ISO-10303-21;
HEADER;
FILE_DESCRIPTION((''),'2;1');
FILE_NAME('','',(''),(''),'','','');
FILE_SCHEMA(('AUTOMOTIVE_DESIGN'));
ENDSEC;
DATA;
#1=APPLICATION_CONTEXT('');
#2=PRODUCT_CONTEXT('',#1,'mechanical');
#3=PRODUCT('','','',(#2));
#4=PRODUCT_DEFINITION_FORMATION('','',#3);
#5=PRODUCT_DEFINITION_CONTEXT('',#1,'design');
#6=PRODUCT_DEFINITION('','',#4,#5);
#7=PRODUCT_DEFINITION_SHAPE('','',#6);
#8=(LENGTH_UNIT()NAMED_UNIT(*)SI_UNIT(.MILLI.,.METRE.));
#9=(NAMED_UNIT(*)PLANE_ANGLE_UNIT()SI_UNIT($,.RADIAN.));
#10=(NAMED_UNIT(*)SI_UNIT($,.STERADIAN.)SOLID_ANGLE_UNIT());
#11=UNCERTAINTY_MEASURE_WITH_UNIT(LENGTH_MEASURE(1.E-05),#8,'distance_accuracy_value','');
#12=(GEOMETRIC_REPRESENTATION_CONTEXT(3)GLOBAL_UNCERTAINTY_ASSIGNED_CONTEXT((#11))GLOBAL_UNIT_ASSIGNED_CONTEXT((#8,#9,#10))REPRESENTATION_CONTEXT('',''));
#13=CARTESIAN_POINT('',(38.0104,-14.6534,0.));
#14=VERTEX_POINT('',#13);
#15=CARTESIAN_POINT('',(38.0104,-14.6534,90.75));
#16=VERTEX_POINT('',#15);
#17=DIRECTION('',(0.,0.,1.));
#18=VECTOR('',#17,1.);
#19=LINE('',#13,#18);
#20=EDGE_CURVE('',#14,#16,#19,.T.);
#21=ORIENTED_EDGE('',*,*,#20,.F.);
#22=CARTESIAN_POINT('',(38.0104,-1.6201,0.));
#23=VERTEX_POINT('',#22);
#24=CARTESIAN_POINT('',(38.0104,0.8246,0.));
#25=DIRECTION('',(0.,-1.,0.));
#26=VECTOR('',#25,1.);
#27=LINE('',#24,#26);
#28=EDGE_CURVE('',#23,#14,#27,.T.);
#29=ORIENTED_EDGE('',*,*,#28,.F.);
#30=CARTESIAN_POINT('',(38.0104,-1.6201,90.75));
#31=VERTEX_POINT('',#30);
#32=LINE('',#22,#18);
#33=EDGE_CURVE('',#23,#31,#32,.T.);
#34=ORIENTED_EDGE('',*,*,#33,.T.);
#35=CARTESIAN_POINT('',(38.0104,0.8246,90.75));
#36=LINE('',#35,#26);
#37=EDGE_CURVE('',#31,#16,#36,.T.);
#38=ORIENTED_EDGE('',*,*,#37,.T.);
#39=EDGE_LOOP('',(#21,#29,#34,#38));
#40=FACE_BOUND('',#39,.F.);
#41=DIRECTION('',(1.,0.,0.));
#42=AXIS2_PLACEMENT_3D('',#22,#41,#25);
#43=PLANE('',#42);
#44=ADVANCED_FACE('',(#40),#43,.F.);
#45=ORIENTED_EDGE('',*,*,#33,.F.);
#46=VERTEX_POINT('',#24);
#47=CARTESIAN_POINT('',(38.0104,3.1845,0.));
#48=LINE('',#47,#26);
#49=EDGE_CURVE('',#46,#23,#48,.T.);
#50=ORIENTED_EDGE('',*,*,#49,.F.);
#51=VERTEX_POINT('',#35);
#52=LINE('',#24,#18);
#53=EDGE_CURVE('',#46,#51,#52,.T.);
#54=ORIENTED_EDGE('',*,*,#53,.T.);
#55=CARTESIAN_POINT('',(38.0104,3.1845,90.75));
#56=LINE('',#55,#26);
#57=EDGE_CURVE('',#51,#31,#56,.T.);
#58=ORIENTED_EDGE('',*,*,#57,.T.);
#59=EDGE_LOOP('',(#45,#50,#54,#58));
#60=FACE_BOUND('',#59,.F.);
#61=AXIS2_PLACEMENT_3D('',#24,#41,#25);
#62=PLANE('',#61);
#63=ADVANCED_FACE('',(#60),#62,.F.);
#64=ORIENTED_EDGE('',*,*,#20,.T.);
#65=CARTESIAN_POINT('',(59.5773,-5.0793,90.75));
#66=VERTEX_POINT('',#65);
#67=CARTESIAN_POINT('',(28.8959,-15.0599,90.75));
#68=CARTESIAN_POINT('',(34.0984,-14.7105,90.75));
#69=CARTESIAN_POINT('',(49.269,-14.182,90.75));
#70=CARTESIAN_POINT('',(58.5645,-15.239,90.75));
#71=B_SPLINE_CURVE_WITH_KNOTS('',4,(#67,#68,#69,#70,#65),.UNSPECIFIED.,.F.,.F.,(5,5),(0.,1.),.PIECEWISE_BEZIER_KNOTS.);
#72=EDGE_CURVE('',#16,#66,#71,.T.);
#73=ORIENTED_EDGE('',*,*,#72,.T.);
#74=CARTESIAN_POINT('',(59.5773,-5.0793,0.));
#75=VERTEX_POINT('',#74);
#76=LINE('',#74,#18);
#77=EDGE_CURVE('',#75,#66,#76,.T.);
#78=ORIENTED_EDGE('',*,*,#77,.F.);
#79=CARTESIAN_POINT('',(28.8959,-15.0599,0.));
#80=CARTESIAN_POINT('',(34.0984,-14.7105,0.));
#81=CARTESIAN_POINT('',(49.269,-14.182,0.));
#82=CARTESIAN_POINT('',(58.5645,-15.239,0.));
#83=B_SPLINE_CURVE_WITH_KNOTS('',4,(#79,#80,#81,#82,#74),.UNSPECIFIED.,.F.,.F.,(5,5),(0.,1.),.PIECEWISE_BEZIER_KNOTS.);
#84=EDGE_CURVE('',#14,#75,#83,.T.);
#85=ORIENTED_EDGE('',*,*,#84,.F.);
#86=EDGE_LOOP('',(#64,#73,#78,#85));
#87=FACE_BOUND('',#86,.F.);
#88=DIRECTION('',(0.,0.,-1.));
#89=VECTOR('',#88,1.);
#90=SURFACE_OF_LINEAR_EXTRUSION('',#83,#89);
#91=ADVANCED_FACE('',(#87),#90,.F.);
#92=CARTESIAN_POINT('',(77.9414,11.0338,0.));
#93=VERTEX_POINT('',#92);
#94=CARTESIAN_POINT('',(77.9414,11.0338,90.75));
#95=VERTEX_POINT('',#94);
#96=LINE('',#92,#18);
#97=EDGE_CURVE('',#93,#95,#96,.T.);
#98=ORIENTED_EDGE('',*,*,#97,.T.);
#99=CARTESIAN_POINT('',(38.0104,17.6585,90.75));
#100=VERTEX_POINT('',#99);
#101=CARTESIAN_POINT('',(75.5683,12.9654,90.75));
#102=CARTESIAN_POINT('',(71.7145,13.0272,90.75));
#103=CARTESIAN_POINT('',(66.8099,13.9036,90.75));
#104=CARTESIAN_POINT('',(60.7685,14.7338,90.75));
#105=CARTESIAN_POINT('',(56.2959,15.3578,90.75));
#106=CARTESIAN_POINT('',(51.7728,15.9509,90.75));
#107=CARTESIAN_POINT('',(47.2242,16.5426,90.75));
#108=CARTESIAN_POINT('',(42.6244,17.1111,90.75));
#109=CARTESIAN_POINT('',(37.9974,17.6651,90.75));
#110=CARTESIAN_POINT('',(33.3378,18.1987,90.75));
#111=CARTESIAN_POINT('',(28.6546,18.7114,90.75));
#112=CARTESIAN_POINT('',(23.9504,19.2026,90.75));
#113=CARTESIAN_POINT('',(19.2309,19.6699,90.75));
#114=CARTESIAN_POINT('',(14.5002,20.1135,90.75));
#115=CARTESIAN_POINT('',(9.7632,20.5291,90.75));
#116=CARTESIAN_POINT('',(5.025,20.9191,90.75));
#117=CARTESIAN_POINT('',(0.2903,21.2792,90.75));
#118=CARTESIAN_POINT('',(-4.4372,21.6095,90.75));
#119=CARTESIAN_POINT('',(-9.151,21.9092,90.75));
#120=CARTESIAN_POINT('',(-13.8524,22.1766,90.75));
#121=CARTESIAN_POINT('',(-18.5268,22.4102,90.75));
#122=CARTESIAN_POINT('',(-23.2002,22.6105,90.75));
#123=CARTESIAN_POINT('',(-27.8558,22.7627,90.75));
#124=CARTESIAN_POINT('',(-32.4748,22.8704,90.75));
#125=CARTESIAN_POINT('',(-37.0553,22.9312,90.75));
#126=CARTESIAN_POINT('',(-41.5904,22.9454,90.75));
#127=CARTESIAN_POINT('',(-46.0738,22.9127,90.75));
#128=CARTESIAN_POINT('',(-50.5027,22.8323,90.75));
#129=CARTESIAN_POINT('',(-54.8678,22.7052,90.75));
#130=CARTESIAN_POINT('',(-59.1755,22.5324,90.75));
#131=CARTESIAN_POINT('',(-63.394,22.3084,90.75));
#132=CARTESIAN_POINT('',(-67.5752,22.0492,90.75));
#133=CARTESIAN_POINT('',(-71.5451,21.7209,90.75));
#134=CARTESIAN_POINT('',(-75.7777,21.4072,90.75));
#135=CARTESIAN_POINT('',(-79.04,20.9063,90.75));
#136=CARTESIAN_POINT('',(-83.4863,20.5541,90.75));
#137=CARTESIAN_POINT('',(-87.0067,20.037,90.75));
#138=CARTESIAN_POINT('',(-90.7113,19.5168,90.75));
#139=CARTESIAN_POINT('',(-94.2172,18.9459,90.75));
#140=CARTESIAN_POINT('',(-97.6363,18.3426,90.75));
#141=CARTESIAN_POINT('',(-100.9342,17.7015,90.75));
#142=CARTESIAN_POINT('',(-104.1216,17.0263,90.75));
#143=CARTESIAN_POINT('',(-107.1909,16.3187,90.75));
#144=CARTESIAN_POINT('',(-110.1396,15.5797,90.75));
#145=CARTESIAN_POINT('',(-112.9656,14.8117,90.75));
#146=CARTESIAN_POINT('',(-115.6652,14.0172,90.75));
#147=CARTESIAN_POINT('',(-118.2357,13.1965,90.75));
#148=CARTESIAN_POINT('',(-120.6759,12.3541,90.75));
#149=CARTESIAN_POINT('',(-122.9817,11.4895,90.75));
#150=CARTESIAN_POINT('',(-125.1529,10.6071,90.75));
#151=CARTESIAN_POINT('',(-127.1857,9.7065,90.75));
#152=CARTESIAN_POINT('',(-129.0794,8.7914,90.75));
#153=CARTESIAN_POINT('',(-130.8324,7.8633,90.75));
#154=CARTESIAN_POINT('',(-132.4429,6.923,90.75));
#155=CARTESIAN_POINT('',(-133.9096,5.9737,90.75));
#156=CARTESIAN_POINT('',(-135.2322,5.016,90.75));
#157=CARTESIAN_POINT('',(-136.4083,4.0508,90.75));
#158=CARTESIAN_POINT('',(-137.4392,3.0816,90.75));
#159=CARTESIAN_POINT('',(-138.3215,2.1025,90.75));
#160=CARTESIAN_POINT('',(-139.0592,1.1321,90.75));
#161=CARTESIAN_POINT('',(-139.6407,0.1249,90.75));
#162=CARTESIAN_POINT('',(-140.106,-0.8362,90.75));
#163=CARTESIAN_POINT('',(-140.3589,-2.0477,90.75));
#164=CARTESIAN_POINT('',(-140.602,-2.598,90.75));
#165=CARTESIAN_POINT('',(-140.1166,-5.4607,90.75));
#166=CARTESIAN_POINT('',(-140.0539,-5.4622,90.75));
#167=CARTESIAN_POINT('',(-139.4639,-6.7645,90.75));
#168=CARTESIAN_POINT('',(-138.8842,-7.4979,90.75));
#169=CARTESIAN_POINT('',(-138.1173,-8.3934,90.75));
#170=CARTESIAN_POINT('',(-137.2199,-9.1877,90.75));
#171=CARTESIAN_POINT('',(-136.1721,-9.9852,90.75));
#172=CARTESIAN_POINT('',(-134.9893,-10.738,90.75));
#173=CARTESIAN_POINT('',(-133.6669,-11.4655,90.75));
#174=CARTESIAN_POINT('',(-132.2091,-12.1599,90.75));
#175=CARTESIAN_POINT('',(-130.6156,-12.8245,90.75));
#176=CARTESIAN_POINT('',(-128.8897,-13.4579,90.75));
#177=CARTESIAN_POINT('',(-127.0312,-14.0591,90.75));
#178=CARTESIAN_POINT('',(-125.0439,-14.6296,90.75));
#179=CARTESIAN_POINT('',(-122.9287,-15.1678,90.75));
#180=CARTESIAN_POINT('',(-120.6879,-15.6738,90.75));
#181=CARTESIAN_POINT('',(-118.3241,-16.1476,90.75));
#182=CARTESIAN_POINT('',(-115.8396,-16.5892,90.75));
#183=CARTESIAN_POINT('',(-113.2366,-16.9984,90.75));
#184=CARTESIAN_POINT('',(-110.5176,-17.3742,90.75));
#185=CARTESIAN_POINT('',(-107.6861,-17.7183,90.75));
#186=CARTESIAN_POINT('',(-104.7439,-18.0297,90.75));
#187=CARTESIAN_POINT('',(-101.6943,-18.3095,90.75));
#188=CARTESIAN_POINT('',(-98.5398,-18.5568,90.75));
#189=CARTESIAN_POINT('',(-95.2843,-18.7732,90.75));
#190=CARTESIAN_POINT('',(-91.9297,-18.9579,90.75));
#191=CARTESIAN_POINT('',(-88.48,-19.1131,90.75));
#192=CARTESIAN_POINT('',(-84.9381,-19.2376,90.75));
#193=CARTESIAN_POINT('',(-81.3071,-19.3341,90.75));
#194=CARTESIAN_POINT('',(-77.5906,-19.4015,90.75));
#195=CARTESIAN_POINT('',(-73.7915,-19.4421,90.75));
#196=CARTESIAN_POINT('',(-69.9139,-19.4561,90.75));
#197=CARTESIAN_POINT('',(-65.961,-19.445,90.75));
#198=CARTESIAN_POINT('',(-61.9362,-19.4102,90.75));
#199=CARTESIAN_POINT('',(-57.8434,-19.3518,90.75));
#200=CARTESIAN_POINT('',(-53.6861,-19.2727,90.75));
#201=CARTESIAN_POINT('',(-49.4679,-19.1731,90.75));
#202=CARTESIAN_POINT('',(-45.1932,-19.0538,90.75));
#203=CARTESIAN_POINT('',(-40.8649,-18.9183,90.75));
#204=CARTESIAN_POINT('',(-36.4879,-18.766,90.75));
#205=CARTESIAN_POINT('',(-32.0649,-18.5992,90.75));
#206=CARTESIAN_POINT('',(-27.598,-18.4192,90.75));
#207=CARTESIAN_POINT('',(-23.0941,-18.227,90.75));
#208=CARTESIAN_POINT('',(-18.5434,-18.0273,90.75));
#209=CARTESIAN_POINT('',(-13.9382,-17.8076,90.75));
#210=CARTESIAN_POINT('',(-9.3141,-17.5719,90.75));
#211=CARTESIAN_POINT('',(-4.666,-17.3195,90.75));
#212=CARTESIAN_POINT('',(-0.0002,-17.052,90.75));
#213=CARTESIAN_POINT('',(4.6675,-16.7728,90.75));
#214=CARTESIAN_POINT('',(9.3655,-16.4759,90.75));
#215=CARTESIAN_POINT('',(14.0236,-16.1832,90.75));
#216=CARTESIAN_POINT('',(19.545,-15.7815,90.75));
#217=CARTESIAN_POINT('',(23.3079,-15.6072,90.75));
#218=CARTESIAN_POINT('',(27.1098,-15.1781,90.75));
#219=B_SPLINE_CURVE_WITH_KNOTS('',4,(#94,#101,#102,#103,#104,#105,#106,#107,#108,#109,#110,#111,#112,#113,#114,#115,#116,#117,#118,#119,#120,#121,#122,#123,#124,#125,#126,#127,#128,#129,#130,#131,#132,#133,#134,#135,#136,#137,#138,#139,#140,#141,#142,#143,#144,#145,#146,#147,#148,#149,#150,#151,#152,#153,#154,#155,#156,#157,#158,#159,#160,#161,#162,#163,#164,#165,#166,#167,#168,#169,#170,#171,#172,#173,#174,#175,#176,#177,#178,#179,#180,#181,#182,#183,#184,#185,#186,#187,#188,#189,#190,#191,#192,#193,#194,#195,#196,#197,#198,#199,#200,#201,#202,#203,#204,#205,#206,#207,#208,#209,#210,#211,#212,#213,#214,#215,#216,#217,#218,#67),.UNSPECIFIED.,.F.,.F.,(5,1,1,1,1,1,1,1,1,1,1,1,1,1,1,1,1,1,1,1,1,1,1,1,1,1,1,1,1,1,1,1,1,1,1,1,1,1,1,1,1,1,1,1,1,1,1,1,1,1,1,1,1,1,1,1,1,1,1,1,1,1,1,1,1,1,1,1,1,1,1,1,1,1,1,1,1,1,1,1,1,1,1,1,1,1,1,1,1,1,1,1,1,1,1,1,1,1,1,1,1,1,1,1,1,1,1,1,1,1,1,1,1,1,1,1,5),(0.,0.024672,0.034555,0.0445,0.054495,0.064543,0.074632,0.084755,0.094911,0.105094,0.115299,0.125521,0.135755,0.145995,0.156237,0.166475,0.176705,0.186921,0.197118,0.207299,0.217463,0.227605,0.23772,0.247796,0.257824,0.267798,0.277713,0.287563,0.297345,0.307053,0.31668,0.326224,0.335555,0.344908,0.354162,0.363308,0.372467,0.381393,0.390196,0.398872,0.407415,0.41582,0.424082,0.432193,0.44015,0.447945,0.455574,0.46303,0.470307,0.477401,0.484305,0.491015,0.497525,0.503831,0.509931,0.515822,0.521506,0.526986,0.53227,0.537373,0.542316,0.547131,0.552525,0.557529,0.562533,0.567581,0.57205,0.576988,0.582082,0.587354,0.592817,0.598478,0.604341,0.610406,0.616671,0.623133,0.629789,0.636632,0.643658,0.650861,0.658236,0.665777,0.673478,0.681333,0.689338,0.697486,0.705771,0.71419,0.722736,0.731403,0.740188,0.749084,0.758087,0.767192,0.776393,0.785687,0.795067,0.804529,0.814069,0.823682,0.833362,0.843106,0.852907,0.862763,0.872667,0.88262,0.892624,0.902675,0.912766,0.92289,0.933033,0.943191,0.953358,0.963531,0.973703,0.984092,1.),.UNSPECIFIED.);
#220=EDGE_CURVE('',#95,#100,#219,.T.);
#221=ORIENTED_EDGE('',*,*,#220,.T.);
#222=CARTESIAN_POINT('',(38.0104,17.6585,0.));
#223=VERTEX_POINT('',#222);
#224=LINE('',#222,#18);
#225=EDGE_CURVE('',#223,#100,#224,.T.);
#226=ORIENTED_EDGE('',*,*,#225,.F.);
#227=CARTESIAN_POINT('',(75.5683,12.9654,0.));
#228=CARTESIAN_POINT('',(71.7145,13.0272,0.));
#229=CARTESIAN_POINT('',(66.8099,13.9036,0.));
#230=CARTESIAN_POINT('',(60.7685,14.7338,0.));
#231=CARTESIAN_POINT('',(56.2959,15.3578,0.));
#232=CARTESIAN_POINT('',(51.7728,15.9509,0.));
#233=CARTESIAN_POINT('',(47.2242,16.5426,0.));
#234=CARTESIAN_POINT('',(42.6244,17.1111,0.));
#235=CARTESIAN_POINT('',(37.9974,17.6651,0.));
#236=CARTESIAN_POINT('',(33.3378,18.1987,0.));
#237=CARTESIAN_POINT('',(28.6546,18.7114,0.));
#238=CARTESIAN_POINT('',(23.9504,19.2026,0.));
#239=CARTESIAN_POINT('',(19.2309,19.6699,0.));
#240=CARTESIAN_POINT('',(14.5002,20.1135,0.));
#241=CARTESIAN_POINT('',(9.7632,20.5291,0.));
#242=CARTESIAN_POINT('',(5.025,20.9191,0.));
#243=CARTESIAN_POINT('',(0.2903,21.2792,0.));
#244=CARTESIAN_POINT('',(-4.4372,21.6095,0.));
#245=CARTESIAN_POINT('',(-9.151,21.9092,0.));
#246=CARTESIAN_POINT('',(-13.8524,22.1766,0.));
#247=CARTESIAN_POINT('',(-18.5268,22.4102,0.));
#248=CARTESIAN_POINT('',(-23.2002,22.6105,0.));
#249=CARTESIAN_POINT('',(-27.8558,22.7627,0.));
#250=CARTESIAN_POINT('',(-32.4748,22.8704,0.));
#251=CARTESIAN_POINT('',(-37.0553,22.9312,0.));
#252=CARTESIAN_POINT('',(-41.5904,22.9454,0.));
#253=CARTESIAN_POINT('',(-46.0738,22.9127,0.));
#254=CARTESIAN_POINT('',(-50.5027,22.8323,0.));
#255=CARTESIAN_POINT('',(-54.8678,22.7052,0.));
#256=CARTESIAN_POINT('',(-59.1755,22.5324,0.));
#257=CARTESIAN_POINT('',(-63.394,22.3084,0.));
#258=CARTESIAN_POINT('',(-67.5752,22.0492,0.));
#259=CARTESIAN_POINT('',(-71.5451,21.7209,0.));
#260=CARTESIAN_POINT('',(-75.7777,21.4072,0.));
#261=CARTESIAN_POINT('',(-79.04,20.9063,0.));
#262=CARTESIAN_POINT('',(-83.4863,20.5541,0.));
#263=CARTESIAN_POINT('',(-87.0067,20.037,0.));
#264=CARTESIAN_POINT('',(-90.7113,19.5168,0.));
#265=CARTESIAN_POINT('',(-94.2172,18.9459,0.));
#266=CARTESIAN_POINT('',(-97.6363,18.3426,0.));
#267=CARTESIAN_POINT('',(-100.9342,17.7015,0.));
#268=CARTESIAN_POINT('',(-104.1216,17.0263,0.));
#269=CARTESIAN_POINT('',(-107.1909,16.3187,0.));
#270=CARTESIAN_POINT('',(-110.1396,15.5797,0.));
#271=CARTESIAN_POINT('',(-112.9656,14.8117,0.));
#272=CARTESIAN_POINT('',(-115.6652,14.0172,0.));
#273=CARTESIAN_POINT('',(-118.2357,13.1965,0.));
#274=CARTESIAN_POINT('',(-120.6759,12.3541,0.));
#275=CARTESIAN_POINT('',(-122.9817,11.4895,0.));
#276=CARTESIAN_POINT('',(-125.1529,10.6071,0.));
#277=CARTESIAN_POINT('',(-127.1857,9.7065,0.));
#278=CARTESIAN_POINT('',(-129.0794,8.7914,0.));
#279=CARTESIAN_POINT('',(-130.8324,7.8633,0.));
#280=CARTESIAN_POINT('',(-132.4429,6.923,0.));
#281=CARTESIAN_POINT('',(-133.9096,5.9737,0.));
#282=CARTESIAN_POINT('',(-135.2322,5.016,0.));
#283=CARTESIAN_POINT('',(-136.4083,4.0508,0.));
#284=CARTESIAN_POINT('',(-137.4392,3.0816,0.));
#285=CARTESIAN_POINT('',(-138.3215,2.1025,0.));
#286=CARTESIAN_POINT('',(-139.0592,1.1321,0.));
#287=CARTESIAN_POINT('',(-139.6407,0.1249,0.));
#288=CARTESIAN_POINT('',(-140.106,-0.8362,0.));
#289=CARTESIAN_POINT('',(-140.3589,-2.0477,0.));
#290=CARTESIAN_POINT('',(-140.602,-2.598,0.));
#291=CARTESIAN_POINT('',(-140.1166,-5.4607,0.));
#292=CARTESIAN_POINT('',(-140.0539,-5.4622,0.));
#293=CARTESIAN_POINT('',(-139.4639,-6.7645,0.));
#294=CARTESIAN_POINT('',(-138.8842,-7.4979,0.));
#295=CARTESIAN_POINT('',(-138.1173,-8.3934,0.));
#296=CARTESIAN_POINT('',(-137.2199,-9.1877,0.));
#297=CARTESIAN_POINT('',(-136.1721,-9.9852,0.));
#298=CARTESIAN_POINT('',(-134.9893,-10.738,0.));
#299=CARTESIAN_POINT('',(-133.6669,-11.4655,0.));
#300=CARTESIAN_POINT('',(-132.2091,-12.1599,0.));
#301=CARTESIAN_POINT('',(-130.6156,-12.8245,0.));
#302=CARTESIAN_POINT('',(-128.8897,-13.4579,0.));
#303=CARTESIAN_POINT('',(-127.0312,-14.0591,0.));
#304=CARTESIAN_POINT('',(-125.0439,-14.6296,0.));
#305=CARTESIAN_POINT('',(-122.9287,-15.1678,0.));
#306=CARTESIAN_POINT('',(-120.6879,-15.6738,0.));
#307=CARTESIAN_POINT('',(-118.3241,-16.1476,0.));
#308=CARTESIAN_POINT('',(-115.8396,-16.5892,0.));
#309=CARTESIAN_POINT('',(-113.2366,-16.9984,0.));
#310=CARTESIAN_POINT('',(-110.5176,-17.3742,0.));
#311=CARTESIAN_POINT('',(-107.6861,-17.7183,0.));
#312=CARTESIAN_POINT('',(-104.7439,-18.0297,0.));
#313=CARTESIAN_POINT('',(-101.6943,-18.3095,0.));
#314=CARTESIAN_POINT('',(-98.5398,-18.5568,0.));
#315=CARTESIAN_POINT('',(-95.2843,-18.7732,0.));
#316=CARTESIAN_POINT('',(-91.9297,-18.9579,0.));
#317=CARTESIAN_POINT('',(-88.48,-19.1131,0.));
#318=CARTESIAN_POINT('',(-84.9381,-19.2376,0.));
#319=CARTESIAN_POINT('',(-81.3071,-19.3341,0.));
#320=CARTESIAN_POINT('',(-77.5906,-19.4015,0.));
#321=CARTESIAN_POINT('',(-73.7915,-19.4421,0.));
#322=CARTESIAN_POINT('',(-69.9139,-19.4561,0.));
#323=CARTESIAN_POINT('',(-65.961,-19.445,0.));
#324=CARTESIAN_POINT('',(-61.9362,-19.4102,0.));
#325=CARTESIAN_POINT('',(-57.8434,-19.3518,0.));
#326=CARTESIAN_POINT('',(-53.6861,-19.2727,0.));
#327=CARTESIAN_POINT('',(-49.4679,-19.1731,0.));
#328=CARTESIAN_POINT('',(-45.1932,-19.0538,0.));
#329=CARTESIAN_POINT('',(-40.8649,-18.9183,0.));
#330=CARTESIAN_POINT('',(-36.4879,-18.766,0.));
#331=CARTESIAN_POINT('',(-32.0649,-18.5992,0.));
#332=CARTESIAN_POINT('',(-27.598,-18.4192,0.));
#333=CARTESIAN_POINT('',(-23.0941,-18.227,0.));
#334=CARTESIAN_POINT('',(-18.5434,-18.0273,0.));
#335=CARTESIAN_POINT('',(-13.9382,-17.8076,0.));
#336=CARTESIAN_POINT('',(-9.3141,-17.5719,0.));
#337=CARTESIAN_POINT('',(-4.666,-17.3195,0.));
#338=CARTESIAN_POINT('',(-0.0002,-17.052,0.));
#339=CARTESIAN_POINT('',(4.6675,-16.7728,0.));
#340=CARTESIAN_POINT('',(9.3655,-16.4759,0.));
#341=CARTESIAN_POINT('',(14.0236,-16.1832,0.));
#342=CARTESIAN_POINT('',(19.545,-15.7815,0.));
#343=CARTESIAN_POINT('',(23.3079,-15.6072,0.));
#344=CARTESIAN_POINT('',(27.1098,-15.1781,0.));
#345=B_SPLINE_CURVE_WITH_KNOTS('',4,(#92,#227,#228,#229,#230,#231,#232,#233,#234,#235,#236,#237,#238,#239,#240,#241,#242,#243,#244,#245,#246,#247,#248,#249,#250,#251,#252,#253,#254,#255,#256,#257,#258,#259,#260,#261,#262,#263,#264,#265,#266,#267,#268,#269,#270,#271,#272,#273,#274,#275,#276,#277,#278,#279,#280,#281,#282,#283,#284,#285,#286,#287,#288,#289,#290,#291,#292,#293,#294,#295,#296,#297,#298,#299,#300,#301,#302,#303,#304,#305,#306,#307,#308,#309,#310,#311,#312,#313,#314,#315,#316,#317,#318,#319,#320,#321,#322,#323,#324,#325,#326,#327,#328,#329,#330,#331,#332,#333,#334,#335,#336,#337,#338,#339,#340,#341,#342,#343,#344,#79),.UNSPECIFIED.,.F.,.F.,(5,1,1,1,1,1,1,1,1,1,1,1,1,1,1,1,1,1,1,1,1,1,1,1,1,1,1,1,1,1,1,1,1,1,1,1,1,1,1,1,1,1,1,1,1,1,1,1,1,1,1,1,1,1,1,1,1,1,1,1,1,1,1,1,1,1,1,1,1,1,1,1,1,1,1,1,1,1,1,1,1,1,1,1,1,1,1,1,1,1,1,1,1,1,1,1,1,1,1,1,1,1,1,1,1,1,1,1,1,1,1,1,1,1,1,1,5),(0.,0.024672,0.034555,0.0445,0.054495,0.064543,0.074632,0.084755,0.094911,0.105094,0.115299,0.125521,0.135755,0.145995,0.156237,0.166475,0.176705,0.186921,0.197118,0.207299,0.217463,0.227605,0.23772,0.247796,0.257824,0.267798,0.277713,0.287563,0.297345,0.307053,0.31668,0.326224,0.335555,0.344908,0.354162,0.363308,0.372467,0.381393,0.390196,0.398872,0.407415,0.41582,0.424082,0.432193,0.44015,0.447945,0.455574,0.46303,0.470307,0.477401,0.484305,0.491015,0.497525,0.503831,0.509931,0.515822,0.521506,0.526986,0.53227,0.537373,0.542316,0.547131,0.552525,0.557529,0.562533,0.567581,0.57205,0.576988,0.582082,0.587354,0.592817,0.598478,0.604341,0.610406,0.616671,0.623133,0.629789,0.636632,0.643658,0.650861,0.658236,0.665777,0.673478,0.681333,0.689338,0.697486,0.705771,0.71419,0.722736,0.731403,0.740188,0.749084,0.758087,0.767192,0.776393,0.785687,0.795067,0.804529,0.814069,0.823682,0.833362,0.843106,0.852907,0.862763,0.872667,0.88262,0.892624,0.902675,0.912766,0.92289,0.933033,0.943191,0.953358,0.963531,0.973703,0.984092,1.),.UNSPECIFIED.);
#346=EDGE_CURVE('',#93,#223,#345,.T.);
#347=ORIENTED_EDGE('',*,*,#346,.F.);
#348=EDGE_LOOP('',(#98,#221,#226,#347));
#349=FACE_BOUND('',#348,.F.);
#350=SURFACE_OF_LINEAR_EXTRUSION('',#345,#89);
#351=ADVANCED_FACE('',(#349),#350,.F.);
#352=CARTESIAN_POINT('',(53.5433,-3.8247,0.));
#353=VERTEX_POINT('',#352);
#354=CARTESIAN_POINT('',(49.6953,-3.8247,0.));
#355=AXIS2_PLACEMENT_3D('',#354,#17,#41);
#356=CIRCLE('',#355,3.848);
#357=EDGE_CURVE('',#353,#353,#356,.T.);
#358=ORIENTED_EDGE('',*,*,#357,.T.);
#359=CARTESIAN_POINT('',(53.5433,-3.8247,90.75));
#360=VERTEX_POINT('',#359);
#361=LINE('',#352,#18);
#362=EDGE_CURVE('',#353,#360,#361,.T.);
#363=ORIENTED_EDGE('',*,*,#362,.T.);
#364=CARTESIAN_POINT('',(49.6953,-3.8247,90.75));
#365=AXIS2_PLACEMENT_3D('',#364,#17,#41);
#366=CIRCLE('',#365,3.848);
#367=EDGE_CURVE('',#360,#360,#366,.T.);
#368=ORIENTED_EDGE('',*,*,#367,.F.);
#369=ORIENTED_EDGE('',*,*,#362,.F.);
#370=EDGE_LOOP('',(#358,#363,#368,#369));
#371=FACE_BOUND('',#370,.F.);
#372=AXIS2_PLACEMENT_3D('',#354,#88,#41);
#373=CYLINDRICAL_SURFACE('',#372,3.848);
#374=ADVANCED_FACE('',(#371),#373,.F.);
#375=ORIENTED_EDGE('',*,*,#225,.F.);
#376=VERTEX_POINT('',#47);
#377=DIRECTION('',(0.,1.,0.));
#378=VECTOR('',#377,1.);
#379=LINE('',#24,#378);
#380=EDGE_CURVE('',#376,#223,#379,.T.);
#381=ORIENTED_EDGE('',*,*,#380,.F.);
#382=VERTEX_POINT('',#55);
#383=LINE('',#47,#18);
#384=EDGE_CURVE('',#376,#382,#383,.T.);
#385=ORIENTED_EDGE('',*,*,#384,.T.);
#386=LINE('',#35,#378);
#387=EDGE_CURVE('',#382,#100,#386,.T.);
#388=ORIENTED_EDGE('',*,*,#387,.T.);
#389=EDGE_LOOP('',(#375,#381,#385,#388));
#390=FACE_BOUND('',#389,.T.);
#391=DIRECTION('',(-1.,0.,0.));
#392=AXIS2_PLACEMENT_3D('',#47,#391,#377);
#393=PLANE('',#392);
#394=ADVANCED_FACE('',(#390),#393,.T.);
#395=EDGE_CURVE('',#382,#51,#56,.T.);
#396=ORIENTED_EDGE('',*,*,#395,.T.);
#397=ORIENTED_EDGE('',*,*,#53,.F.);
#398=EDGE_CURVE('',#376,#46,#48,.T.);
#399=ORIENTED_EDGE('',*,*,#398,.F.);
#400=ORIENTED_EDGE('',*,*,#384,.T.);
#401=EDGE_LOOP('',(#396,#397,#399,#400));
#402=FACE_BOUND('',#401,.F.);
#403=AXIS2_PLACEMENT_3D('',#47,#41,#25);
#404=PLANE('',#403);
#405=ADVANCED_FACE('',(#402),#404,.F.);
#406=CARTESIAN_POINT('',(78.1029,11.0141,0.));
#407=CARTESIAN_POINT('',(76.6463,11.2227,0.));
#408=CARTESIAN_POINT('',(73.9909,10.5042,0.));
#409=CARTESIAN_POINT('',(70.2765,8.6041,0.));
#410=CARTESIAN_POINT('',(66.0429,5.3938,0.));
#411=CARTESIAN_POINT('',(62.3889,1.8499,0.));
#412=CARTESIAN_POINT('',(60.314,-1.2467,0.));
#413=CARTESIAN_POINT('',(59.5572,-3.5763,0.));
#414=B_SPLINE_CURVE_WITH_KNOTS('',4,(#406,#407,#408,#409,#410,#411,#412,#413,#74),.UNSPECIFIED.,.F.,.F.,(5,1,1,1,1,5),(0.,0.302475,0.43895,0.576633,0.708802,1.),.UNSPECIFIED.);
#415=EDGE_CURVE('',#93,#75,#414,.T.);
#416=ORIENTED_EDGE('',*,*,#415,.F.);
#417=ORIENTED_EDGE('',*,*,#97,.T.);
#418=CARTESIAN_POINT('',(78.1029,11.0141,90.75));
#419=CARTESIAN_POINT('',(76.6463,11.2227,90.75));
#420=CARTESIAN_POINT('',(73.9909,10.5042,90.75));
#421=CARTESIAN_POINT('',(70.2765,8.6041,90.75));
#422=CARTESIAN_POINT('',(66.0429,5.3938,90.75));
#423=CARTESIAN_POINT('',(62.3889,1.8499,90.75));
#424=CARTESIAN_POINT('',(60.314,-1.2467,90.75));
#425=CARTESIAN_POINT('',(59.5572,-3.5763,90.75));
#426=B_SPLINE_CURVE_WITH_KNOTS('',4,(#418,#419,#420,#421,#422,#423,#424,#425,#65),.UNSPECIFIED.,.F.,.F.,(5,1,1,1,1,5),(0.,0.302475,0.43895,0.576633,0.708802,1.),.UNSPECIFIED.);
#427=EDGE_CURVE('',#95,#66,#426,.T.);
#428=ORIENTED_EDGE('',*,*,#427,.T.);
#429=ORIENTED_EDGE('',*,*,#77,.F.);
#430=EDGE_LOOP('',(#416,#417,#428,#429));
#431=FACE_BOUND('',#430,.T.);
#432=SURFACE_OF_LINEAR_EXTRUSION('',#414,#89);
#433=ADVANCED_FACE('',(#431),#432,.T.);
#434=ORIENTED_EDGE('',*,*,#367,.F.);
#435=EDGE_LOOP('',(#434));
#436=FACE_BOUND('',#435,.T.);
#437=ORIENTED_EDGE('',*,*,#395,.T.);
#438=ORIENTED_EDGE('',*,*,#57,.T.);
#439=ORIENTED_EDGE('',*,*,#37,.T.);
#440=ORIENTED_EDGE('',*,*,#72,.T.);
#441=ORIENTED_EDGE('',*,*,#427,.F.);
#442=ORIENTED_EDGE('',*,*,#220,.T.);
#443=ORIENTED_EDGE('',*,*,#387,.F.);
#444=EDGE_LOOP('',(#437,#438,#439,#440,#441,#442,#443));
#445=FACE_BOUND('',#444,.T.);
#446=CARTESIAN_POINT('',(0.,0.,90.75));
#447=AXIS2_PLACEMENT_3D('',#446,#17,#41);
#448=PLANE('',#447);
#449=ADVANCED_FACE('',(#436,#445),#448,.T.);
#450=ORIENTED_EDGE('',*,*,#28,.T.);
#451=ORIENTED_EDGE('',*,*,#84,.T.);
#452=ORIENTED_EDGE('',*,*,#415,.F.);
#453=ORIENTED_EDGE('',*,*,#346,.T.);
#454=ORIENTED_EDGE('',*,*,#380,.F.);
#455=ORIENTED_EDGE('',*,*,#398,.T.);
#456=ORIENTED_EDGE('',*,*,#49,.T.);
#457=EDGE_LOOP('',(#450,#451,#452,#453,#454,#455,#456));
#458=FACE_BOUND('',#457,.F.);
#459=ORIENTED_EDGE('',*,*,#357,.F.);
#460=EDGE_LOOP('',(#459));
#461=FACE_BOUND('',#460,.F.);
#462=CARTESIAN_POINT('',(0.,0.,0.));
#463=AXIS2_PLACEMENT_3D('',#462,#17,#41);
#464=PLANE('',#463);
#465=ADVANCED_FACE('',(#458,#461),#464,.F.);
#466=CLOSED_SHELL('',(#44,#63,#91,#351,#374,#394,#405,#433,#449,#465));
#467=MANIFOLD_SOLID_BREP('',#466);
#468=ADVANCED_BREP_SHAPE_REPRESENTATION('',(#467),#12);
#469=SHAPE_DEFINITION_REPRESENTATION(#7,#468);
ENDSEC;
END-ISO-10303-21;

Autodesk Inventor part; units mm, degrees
ref_plane "YZ Plane" through (0, 0, 0) normal (1, 0, 0) x (0, 1, 0)
ref_plane "XZ Plane" through (0, 0, 0) normal (0, 1, 0) x (-1, 0, 0)
ref_plane "XY Plane" through (0, 0, 0) normal (0, 0, 1) x (1, 0, 0)
sketch "Sketch3" plane through (0, 0, 0) normal (0, 0, 1) x (1, 0, 0)
  line L0 (-80.5781, 0.8246) -> (-80.5781, 20.7988) construction
  circle A0 centre (-80.5781, 0.8246) radius 13.481
  line L1 (-53.7179, 12.5571) -> (-53.7179, -10.9927)
  arc A1 (-53.7179, -10.9927) -> (-51.5054, -12.9814) centre (-51.7179, -10.9927) ccw
  arc A2 (-51.5054, 14.5458) -> (-53.7179, 12.5571) centre (-51.7179, 12.5571) ccw
  line L2 (36.2229, -3.6088) -> (-51.5054, -12.9814)
  line L3 (38.0104, 3.1845) -> (38.0104, -1.6201)
  line L4 (-80.5781, 0.8246) -> (49.5525, 0.8246) construction
  circle A3 centre (49.6953, -3.8247) radius 3.848
  line L5 (59.6953, 14.884) -> (59.6953, -12.7998) construction
  spline S0 degree 4 poles (77.9414, 11.0338) (75.5683, 12.9654) (71.7145, 13.0272) (66.8099, 13.9036) (60.7685, 14.7338) (56.2959, 15.3578) (51.7728, 15.9509) (47.2242, 16.5426) (42.6244, 17.1111) (37.9974, 17.6651) (33.3378, 18.1987) (28.6546, 18.7114) (23.9504, 19.2026) (19.2309, 19.6699) (14.5002, 20.1135) (9.7632, 20.5291) (5.025, 20.9191) (0.2903, 21.2792) (-4.4372, 21.6095) (-9.151, 21.9092) (-13.8524, 22.1766) (-18.5268, 22.4102) (-23.2002, 22.6105) (-27.8558, 22.7627) (-32.4748, 22.8704) (-37.0553, 22.9312) (-41.5904, 22.9454) (-46.0738, 22.9127) (-50.5027, 22.8323) (-54.8678, 22.7052) (-59.1755, 22.5324) (-63.394, 22.3084) (-67.5752, 22.0492) (-71.5451, 21.7209) (-75.7777, 21.4072) (-79.04, 20.9063) (-83.4863, 20.5541) (-87.0067, 20.037) (-90.7113, 19.5168) (-94.2172, 18.9459) (-97.6363, 18.3426) (-100.9342, 17.7015) (-104.1216, 17.0263) (-107.1909, 16.3187) (-110.1396, 15.5797) (-112.9656, 14.8117) (-115.6652, 14.0172) (-118.2357, 13.1965) (-120.6759, 12.3541) (-122.9817, 11.4895) (-125.1529, 10.6071) (-127.1857, 9.7065) (-129.0794, 8.7914) (-130.8324, 7.8633) (-132.4429, 6.923) (-133.9096, 5.9737) (-135.2322, 5.016) (-136.4083, 4.0508) (-137.4392, 3.0816) (-138.3215, 2.1025) (-139.0592, 1.1321) (-139.6407, 0.1249) (-140.106, -0.8362) (-140.3589, -2.0477) (-140.602, -2.598) (-140.1166, -5.4607) (-140.0539, -5.4622) (-139.4639, -6.7645) (-138.8842, -7.4979) (-138.1173, -8.3934) (-137.2199, -9.1877) (-136.1721, -9.9852) (-134.9893, -10.738) (-133.6669, -11.4655) (-132.2091, -12.1599) (-130.6156, -12.8245) (-128.8897, -13.4579) (-127.0312, -14.0591) (-125.0439, -14.6296) (-122.9287, -15.1678) (-120.6879, -15.6738) (-118.3241, -16.1476) (-115.8396, -16.5892) (-113.2366, -16.9984) (-110.5176, -17.3742) (-107.6861, -17.7183) (-104.7439, -18.0297) (-101.6943, -18.3095) (-98.5398, -18.5568) (-95.2843, -18.7732) (-91.9297, -18.9579) (-88.48, -19.1131) (-84.9381, -19.2376) (-81.3071, -19.3341) (-77.5906, -19.4015) (-73.7915, -19.4421) (-69.9139, -19.4561) (-65.961, -19.445) (-61.9362, -19.4102) (-57.8434, -19.3518) (-53.6861, -19.2727) (-49.4679, -19.1731) (-45.1932, -19.0538) (-40.8649, -18.9183) (-36.4879, -18.766) (-32.0649, -18.5992) (-27.598, -18.4192) (-23.0941, -18.227) (-18.5434, -18.0273) (-13.9382, -17.8076) (-9.3141, -17.5719) (-4.666, -17.3195) (-0.0002, -17.052) (4.6675, -16.7728) (9.3655, -16.4759) (14.0236, -16.1832) (19.545, -15.7815) (23.3079, -15.6072) (27.1098, -15.1781) (28.8959, -15.0599) knots 0 0 0 0 0 0.024672 0.034555 0.0445 0.054495 0.064543 0.074632 0.084755 0.094911 0.105094 0.115299 0.125521 0.135755 0.145995 0.156237 0.166475 0.176705 0.186921 0.197118 0.207299 0.217463 0.227605 0.23772 0.247796 0.257824 0.267798 0.277713 0.287563 0.297345 0.307053 0.31668 0.326224 0.335555 0.344908 0.354162 0.363308 0.372467 0.381393 0.390196 0.398872 0.407415 0.41582 0.424082 0.432193 0.44015 0.447945 0.455574 0.46303 0.470307 0.477401 0.484305 0.491015 0.497525 0.503831 0.509931 0.515822 0.521506 0.526986 0.53227 0.537373 0.542316 0.547131 0.552525 0.557529 0.562533 0.567581 0.57205 0.576988 0.582082 0.587354 0.592817 0.598478 0.604341 0.610406 0.616671 0.623133 0.629789 0.636632 0.643658 0.650861 0.658236 0.665777 0.673478 0.681333 0.689338 0.697486 0.705771 0.71419 0.722736 0.731403 0.740188 0.749084 0.758087 0.767192 0.776393 0.785687 0.795067 0.804529 0.814069 0.823682 0.833362 0.843106 0.852907 0.862763 0.872667 0.88262 0.892624 0.902675 0.912766 0.92289 0.933033 0.943191 0.953358 0.963531 0.973703 0.984092 1 1 1 1 1
  line L6 (7.5013, -16.4763) -> (50.2906, -13.6435) construction
  arc A4 (44.8353, -17.2546) -> (13.385, -19.3367) centre (31.5327, -54.8885) ccw construction
  line L7 (159.6953, -3.8066) -> (59.6953, -3.8066) construction
  line L8 (-51.5054, 14.5458) -> (36.2229, 5.1732)
  arc A5 (36.2229, -3.6088) -> (38.0104, -1.6201) centre (36.0104, -1.6201) ccw
  arc A6 (38.0104, 3.1845) -> (36.2229, 5.1732) centre (36.0104, 3.1845) ccw
  spline S1 degree 4 poles (78.1029, 11.0141) (76.6463, 11.2227) (73.9909, 10.5042) (70.2765, 8.6041) (66.0429, 5.3938) (62.3889, 1.8499) (60.314, -1.2467) (59.5572, -3.5763) (59.5773, -5.0793) knots 0 0 0 0 0 0.302475 0.43895 0.576633 0.708802 1 1 1 1 1
  spline S2 degree 4 poles (28.8959, -15.0599) (34.0984, -14.7105) (49.269, -14.182) (58.5645, -15.239) (59.5773, -5.0793) knots 0 0 0 0 0 1 1 1 1 1
  line L9 (28.8959, -15.0599) -> (34.0984, -14.7105) construction
  line L10 (34.0984, -14.7105) -> (49.269, -14.182) construction
  line L11 (49.269, -14.182) -> (58.5645, -15.239) construction
  line L12 (58.5645, -15.239) -> (59.5773, -5.0793) construction
  line L13 (-140.4646, -2.8394) -> (159.4818, -3.8173) construction
  line L14 (-132.0856, 0.6333) -> (-132.0856, -6.3667)
  line L15 (-132.0856, -6.3667) -> (-110.3816, -12.3574)
  line L16 (-110.3816, -12.3574) -> (-104.797, -12.3574)
  line L17 (-104.797, -12.3574) -> (-104.797, -18.0156)
  line L18 (-132.0856, 0.6333) -> (-110.3816, 10.553)
  line L19 (-110.3816, 10.553) -> (-104.1736, 10.553)
  line L20 (-104.1736, 10.553) -> (-104.1736, 17.0026)
  line L21 (38.0104, 0.8246) -> (38.0104, -14.6534)
  line L22 (38.0104, 0.8246) -> (38.0104, 17.6585)
  point P0 (0, 0)
  point P1 (17.6589, 23.5628)
  point P2 (75.883, 10.8572)
  point P3 (72.8647, 9.7686)
  point P4 (69.4179, 7.8149)
  point P5 (66.0452, 5.2617)
  point P6 (63.1887, 2.4463)
  point P7 (61.1228, -0.3317)
  point P8 (59.9357, -2.8689)
  point P9 (-160.0931, -3.8671)
  point P10 (28.8959, -15.0599)
  point P11 (69.5533, 13.4647)
  point P12 (65.1899, 14.1023)
  point P13 (60.7936, 14.7318)
  point P14 (56.3207, 15.3468)
  point P15 (51.7945, 15.947)
  point P16 (47.2398, 16.5346)
  point P17 (42.6414, 17.1053)
  point P18 (33.3491, 18.1925)
  point P19 (28.6632, 18.7055)
  point P20 (23.9568, 19.1966)
  point P21 (19.2348, 19.6643)
  point P22 (14.5017, 20.1074)
  point P23 (9.7623, 20.5238)
  point P24 (5.0217, 20.9132)
  point P25 (0.2844, 21.2735)
  point P26 (-4.4451, 21.6038)
  point P27 (-9.1614, 21.9032)
  point P28 (-13.86, 22.1702)
  point P29 (-18.5361, 22.4036)
  point P30 (-23.211, 22.601)
  point P31 (-27.8721, 22.754)
  point P32 (-32.4966, 22.8611)
  point P33 (-37.0797, 22.9217)
  point P34 (-41.6169, 22.9356)
  point P35 (-46.1028, 22.9023)
  point P36 (-50.5329, 22.8216)
  point P37 (-54.9021, 22.6941)
  point P38 (-59.2065, 22.5195)
  point P39 (-63.4406, 22.2977)
  point P40 (-67.6008, 22.0302)
  point P41 (-71.6806, 21.7165)
  point P42 (-75.6814, 21.3591)
  point P43 (-79.1834, 20.9458)
  point P44 (-83.4048, 20.5095)
  point P45 (-87.1309, 20.023)
  point P46 (-90.7527, 19.494)
  point P47 (-94.2725, 18.9266)
  point P48 (-97.6845, 18.3211)
  point P49 (-100.9861, 17.6791)
  point P50 (-107.2438, 16.2934)
  point P51 (-110.1931, 15.553)
  point P52 (-113.0194, 14.7835)
  point P53 (-115.7191, 13.987)
  point P54 (-118.2898, 13.165)
  point P55 (-120.7294, 12.3201)
  point P56 (-123.0349, 11.454)
  point P57 (-125.2048, 10.569)
  point P58 (-127.2364, 9.6666)
  point P59 (-129.1282, 8.7491)
  point P60 (-130.8786, 7.8185)
  point P61 (-132.486, 6.8762)
  point P62 (-133.9488, 5.9245)
  point P63 (-135.2661, 4.9648)
  point P64 (-136.4363, 3.9987)
  point P65 (-137.4592, 3.0275)
  point P66 (-138.3336, 2.0531)
  point P67 (-139.0591, 1.0763)
  point P68 (-139.6352, 0.0983)
  point P69 (-140.0613, -0.8802)
  point P70 (-140.338, -1.8576)
  point P71 (-140.1239, -5.2398)
  point P72 (-139.9547, -5.7022)
  point P73 (-139.492, -6.6066)
  point P74 (-138.8844, -7.4823)
  point P75 (-138.1328, -8.3292)
  point P76 (-137.2384, -9.147)
  point P77 (-136.202, -9.9355)
  point P78 (-135.0249, -10.6943)
  point P79 (-133.7085, -11.4228)
  point P80 (-132.2548, -12.1206)
  point P81 (-130.6648, -12.7879)
  point P82 (-128.941, -13.4239)
  point P83 (-127.0846, -14.0282)
  point P84 (-125.0983, -14.6009)
  point P85 (-122.9839, -15.1415)
  point P86 (-120.7435, -15.6497)
  point P87 (-118.3798, -16.1256)
  point P88 (-115.8952, -16.569)
  point P89 (-113.2918, -16.9797)
  point P90 (-110.5723, -17.3574)
  point P91 (-107.74, -17.7027)
  point P92 (-101.7463, -18.2964)
  point P93 (-98.5909, -18.5451)
  point P94 (-95.3341, -18.7623)
  point P95 (-91.9783, -18.9484)
  point P96 (-88.5271, -19.1041)
  point P97 (-84.9838, -19.2298)
  point P98 (-81.3514, -19.3267)
  point P99 (-77.6332, -19.3951)
  point P100 (-73.8324, -19.4362)
  point P101 (-69.9531, -19.4509)
  point P102 (-65.9985, -19.4404)
  point P103 (-61.9719, -19.4059)
  point P104 (-57.8772, -19.3483)
  point P105 (-53.718, -19.2694)
  point P106 (-49.4979, -19.1701)
  point P107 (-45.2211, -19.0516)
  point P108 (-40.8909, -18.916)
  point P109 (-36.5118, -18.7642)
  point P110 (-32.0871, -18.5977)
  point P111 (-27.6213, -18.418)
  point P112 (-23.1183, -18.2269)
  point P113 (-18.5646, -18.0247)
  point P114 (-13.9566, -17.8054)
  point P115 (-9.3252, -17.5693)
  point P116 (-4.674, -17.317)
  point P117 (-0.0078, -17.05)
  point P118 (4.6686, -16.7695)
  point P119 (9.3513, -16.477)
  point P120 (14.0352, -16.1731)
  point P121 (18.7161, -15.8596)
  point P122 (23.3889, -15.5371)
  point P123 (78.0825, 12.164)
  point P124 (159.2574, -3.8401)
  point P125 (158.8836, -3.8779)
  point P126 (158.3607, -3.9307)
  point P127 (157.6896, -3.9985)
  point P128 (156.8706, -4.081)
  point P129 (155.9046, -4.1779)
  point P130 (154.7931, -4.2892)
  point P131 (153.5367, -4.4143)
  point P132 (152.1372, -4.5532)
  point P133 (150.5955, -4.7056)
  point P134 (148.914, -4.8712)
  point P135 (147.0936, -5.0494)
  point P136 (145.137, -5.2399)
  point P137 (143.0457, -5.4421)
  point P138 (140.8221, -5.6563)
  point P139 (138.4686, -5.8813)
  point P140 (135.9876, -6.1174)
  point P141 (133.3815, -6.3634)
  point P142 (130.6533, -6.6196)
  point P143 (127.8054, -6.8851)
  point P144 (124.8414, -7.1596)
  point P145 (121.7634, -7.4428)
  point P146 (118.5756, -7.7341)
  point P147 (115.2804, -8.0332)
  point P148 (111.8817, -8.3395)
  point P149 (108.3828, -8.6527)
  point P150 (104.787, -8.9722)
  point P151 (101.0985, -9.2974)
  point P152 (97.3206, -9.6283)
  point P153 (93.4572, -9.9643)
  point P154 (89.5122, -10.3048)
  point P155 (85.4898, -10.6492)
  point P156 (81.3936, -10.9969)
  point P157 (77.2284, -11.3479)
  point P158 (72.9975, -11.701)
  point P159 (68.7057, -12.0556)
  point P160 (64.3572, -12.4117)
  point P161 (59.9559, -12.7678)
  point P162 (55.5069, -13.1239)
  point P163 (51.0138, -13.4788)
  point P164 (46.4817, -13.8316)
  point P165 (41.9148, -14.182)
  point P166 (35.7035, -14.3277)
  point P167 (32.6946, -14.8708)
  point P168 (82.2459, 11.5043)
  point P169 (86.3364, 10.8401)
  point P170 (90.3495, 10.1732)
  point P171 (94.2816, 9.5051)
  point P172 (98.1288, 8.837)
  point P173 (101.8872, 8.171)
  point P174 (105.5538, 7.5086)
  point P175 (109.1244, 6.8507)
  point P176 (112.596, 6.1997)
  point P177 (115.9653, 5.5565)
  point P178 (119.2287, 4.9229)
  point P179 (122.3835, 4.3007)
  point P180 (125.4264, 3.6911)
  point P181 (128.3547, 3.0956)
  point P182 (131.1654, 2.5157)
  point P183 (133.8561, 1.9532)
  point P184 (136.4244, 1.4093)
  point P185 (138.8676, 0.8855)
  point P186 (141.1833, 0.383)
  point P187 (143.3697, -0.0964)
  point P188 (145.4247, -0.5518)
  point P189 (147.3462, -0.9817)
  point P190 (149.1327, -1.3852)
  point P191 (150.7821, -1.7608)
  point P192 (152.2935, -2.1073)
  point P193 (153.6651, -2.4241)
  point P194 (154.8954, -2.7103)
  point P195 (155.9838, -2.9647)
  point P196 (156.9291, -3.187)
  point P197 (157.7307, -3.376)
  point P198 (158.3871, -3.5317)
  point P199 (158.8986, -3.6529)
  dimension "d3" = 26.962
  dimension "d6" = 7.696
  dimension "d7" = 110
  dimension "d8" = 100
  dimension "d9" = 2
  dimension "d11" = 4.6493
  dimension "d25" = 7
  dimension "d26" = 3.5
  dimension "d27" = 8.379
  dimension "d28" = 30.083
  dimension "d29" = 5
  dimension "d30" = 5
  dimension "d31" = 59.8865
extrude "Extrusion3" add sketch "Sketch3" along normal blind 90.75 contours L22 S0 S1 S2 L21 L3
properties part number "3P.05.07.JS.flap trailing edge 90_CPY" material "Polyurethane Foam"
